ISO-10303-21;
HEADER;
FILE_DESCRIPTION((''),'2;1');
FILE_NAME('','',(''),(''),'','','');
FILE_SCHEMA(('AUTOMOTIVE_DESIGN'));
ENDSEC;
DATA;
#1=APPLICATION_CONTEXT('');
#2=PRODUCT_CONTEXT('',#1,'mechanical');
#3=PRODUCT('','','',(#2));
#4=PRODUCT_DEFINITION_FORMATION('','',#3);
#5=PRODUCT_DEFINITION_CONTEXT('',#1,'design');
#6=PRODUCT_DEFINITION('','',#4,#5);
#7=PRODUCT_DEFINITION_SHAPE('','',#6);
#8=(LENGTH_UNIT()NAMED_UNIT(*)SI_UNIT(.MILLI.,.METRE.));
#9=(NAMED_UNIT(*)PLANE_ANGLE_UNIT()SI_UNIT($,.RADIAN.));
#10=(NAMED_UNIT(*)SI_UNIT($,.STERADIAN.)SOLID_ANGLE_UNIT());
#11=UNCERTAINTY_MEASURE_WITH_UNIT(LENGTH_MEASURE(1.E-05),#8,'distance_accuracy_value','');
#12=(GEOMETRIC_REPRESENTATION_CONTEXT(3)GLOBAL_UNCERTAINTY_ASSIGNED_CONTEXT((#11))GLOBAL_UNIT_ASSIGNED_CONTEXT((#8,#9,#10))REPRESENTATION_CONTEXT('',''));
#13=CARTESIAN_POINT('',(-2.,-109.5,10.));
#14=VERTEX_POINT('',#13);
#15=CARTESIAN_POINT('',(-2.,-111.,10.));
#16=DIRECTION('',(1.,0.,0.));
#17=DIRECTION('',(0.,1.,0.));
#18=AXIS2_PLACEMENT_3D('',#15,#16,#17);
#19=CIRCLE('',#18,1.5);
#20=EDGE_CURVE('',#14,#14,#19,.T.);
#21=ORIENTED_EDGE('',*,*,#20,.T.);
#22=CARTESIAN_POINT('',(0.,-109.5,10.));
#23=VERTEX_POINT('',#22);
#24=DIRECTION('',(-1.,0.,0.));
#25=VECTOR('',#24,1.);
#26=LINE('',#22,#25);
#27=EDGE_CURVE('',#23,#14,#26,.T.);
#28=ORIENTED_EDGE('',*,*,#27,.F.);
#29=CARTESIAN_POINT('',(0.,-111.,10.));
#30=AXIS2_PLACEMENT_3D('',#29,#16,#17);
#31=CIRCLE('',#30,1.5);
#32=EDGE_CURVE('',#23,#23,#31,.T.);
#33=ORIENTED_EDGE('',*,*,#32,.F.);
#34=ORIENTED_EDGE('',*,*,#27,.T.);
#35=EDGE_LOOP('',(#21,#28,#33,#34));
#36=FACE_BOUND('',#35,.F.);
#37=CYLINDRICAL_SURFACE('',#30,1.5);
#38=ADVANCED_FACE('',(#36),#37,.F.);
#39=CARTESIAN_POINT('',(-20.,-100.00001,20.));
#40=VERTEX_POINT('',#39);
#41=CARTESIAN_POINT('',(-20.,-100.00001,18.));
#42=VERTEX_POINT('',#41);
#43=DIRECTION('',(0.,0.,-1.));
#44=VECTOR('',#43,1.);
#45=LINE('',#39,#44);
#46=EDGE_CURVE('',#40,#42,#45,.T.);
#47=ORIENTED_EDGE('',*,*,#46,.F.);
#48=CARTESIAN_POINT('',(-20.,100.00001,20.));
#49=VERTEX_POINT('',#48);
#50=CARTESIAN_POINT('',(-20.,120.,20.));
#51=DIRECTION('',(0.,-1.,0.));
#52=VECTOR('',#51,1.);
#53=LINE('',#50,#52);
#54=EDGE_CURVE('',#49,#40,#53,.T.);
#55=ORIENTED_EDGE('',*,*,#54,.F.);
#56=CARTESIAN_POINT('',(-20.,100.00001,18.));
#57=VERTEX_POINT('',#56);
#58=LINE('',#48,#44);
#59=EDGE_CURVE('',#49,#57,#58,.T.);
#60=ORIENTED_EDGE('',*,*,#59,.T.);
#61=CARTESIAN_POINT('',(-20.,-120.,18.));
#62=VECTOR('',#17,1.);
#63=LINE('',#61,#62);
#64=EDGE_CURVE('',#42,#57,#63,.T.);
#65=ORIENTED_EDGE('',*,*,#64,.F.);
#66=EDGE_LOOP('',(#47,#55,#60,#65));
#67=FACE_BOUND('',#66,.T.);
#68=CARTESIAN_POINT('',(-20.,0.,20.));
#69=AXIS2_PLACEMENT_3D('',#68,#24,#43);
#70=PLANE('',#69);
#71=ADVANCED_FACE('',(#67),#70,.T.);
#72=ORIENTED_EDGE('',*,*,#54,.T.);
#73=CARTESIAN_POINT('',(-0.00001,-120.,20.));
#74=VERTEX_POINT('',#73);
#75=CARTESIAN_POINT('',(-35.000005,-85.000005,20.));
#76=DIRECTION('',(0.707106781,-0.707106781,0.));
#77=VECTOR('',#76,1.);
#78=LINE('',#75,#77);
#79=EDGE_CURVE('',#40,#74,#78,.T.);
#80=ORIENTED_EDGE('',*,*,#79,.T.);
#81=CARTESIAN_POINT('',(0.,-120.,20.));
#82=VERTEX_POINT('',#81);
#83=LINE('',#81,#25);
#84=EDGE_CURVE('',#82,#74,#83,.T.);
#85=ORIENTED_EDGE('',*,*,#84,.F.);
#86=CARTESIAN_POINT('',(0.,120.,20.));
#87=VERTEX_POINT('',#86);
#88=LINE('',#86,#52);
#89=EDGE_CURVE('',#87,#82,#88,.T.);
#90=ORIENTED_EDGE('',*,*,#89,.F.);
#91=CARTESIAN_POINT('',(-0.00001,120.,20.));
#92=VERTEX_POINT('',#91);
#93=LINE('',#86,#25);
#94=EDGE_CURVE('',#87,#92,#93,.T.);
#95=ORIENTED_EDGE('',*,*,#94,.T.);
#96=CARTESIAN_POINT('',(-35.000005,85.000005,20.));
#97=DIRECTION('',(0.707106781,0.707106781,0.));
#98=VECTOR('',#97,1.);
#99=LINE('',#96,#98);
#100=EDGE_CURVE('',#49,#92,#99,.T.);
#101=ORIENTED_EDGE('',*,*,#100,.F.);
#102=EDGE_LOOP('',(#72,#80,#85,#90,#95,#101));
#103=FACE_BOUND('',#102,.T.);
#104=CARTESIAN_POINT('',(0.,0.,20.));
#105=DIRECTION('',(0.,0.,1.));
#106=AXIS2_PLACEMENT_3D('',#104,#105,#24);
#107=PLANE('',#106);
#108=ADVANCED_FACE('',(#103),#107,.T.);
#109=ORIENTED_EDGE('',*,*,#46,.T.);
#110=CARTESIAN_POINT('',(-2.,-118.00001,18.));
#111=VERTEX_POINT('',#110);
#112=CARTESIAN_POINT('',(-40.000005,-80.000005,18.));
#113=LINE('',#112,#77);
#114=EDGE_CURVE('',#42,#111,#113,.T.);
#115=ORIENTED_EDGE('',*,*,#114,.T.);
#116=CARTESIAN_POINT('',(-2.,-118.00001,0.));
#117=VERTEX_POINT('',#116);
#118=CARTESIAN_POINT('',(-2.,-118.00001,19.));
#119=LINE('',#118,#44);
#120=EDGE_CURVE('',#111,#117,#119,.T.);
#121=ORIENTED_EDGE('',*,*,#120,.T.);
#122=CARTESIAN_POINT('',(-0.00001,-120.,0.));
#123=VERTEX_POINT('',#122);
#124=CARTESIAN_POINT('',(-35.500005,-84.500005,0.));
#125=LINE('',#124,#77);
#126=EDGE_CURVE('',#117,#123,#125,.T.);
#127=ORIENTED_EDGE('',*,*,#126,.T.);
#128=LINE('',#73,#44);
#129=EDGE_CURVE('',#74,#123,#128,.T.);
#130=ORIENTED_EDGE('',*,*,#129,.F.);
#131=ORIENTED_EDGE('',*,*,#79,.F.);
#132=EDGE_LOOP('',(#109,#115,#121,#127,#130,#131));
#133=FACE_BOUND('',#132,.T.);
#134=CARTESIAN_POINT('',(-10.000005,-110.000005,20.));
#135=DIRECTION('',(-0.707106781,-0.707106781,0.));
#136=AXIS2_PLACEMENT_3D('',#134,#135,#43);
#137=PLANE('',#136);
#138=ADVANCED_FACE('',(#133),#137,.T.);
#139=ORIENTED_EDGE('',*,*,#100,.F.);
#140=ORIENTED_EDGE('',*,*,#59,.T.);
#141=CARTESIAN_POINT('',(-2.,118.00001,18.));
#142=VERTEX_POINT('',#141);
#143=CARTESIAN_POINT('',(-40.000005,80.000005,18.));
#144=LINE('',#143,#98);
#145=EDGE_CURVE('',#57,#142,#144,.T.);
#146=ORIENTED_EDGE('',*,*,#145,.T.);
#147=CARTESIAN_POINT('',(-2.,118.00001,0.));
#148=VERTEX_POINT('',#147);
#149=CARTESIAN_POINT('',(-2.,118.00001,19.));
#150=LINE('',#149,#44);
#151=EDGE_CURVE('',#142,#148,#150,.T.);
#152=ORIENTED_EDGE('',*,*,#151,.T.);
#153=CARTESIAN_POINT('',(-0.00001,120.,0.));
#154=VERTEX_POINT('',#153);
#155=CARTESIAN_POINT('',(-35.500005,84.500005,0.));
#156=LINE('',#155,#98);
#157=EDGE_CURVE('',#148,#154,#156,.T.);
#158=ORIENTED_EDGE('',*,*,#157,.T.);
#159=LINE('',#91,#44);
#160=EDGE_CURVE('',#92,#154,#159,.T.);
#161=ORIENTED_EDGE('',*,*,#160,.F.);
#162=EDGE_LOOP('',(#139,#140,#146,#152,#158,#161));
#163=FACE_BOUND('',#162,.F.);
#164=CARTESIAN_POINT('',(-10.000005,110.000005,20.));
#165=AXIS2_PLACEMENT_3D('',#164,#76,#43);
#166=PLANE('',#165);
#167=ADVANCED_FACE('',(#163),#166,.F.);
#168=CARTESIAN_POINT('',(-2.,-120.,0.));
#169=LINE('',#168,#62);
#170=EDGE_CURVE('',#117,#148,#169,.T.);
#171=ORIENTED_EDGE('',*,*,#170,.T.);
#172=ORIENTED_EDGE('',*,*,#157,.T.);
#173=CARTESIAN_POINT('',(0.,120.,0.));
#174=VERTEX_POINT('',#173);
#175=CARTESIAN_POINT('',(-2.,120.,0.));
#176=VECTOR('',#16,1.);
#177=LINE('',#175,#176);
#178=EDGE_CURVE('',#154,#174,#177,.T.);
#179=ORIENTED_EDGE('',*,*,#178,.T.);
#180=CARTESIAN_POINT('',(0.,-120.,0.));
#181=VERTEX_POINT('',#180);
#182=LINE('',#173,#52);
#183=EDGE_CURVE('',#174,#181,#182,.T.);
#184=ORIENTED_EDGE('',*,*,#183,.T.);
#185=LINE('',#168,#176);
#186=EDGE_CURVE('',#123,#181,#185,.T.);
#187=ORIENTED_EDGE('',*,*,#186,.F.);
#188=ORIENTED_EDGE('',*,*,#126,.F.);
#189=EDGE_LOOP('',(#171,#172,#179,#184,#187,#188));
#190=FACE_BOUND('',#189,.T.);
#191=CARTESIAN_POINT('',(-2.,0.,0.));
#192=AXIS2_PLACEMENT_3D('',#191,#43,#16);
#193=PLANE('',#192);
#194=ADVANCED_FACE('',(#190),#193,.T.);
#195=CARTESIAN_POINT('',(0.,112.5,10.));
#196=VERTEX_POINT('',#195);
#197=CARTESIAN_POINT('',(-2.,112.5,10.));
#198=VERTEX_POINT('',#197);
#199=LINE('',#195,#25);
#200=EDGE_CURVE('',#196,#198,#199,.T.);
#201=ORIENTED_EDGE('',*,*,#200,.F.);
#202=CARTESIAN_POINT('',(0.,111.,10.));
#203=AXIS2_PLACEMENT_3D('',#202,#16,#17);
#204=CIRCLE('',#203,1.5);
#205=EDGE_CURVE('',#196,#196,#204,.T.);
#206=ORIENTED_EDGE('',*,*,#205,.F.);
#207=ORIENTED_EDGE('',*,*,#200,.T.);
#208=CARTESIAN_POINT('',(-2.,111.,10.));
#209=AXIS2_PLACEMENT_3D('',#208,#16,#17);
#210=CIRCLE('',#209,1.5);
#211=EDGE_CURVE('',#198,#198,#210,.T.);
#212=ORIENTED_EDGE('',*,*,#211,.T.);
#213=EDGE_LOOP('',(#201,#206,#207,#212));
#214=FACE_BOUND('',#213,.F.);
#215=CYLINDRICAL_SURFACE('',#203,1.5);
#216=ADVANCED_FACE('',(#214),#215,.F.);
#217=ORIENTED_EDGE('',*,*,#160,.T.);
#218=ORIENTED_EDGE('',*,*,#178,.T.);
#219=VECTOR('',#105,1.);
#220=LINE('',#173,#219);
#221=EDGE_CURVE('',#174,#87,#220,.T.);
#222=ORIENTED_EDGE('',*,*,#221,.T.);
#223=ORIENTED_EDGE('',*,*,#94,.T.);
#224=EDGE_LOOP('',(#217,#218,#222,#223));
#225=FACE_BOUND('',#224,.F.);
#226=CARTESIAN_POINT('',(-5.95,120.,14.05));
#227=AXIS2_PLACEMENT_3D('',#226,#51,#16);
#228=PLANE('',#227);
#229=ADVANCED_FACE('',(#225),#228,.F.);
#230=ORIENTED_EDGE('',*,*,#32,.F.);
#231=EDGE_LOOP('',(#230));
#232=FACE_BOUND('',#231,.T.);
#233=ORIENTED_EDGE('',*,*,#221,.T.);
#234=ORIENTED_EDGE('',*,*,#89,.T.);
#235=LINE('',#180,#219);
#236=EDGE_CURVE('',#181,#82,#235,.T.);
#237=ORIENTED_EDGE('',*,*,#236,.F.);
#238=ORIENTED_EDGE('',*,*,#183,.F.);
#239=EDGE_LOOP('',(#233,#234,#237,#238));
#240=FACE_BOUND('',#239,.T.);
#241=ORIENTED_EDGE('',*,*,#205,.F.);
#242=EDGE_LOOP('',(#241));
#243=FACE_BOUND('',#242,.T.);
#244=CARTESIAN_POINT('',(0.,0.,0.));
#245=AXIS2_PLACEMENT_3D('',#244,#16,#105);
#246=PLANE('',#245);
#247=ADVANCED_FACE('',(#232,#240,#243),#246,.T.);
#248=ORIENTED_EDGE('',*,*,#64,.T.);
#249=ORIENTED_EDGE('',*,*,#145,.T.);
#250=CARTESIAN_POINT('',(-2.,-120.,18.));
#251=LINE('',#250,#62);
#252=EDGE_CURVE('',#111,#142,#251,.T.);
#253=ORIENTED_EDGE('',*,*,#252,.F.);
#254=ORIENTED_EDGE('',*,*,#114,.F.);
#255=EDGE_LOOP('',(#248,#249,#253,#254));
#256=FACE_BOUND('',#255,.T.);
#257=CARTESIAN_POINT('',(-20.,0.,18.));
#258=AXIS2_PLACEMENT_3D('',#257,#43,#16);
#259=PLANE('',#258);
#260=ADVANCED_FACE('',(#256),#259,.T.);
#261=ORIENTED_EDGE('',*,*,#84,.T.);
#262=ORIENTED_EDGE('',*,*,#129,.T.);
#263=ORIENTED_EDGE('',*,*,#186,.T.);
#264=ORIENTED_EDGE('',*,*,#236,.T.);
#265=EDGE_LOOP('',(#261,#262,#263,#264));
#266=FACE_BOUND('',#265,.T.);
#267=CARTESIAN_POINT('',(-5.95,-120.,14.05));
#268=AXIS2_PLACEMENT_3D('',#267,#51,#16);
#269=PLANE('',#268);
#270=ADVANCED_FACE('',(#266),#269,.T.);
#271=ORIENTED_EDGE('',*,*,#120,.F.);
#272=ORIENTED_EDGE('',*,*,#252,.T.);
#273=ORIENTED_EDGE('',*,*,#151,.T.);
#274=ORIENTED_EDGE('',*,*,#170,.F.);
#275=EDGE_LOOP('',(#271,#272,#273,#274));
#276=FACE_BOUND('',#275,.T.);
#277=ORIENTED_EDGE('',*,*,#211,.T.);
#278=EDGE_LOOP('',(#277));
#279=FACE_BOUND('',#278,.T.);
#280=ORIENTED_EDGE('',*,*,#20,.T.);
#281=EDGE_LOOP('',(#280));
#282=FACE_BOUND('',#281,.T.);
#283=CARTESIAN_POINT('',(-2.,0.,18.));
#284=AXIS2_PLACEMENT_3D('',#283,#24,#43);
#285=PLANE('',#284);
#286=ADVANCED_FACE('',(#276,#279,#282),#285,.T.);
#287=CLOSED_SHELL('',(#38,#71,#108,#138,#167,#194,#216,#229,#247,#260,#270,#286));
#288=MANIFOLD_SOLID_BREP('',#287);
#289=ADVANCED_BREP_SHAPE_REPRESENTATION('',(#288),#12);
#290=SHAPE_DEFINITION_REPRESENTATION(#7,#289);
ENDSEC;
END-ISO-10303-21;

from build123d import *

# Parameters (mm, degrees)
F1_DEPTH = 120
F2_SIZE  = 19.99999
F3_R     = 1.5
F4_DEPTH = 20.001


# Not quite as in the source:
# - a fillet or chamfer is up to 0.001 mm smaller than in the source, because OpenCascade refuses the exact size


with BuildPart() as f1:
    # F0 (on Front) → F1 (new body, symmetric)
    with BuildSketch(Plane.XZ):
        Polygon((-2, 0), (0, 0), (0, 20), (-20, 20), (-20, 18), (-2, 18), align=None)
    extrude(amount=F1_DEPTH, both=True)

    # F2 (size 20 in the source; OpenCascade refuses exactly that, so slightly less here)
    f2_edges = [f1.edges().sort_by_distance(p)[0] for p in [
        (-20, -120, 19),
        (-20, 120, 19),
    ]]
    chamfer(f2_edges, length=F2_SIZE)

    # F3 (on face) → F4 (cut, through all)
    with BuildSketch(Plane.YZ):
        with Locations((111, 10)):
            Circle(F3_R)
        with Locations((-111, 10)):
            Circle(F3_R)
    extrude(amount=-F4_DEPTH, mode=Mode.SUBTRACT)


solid = f1.part
